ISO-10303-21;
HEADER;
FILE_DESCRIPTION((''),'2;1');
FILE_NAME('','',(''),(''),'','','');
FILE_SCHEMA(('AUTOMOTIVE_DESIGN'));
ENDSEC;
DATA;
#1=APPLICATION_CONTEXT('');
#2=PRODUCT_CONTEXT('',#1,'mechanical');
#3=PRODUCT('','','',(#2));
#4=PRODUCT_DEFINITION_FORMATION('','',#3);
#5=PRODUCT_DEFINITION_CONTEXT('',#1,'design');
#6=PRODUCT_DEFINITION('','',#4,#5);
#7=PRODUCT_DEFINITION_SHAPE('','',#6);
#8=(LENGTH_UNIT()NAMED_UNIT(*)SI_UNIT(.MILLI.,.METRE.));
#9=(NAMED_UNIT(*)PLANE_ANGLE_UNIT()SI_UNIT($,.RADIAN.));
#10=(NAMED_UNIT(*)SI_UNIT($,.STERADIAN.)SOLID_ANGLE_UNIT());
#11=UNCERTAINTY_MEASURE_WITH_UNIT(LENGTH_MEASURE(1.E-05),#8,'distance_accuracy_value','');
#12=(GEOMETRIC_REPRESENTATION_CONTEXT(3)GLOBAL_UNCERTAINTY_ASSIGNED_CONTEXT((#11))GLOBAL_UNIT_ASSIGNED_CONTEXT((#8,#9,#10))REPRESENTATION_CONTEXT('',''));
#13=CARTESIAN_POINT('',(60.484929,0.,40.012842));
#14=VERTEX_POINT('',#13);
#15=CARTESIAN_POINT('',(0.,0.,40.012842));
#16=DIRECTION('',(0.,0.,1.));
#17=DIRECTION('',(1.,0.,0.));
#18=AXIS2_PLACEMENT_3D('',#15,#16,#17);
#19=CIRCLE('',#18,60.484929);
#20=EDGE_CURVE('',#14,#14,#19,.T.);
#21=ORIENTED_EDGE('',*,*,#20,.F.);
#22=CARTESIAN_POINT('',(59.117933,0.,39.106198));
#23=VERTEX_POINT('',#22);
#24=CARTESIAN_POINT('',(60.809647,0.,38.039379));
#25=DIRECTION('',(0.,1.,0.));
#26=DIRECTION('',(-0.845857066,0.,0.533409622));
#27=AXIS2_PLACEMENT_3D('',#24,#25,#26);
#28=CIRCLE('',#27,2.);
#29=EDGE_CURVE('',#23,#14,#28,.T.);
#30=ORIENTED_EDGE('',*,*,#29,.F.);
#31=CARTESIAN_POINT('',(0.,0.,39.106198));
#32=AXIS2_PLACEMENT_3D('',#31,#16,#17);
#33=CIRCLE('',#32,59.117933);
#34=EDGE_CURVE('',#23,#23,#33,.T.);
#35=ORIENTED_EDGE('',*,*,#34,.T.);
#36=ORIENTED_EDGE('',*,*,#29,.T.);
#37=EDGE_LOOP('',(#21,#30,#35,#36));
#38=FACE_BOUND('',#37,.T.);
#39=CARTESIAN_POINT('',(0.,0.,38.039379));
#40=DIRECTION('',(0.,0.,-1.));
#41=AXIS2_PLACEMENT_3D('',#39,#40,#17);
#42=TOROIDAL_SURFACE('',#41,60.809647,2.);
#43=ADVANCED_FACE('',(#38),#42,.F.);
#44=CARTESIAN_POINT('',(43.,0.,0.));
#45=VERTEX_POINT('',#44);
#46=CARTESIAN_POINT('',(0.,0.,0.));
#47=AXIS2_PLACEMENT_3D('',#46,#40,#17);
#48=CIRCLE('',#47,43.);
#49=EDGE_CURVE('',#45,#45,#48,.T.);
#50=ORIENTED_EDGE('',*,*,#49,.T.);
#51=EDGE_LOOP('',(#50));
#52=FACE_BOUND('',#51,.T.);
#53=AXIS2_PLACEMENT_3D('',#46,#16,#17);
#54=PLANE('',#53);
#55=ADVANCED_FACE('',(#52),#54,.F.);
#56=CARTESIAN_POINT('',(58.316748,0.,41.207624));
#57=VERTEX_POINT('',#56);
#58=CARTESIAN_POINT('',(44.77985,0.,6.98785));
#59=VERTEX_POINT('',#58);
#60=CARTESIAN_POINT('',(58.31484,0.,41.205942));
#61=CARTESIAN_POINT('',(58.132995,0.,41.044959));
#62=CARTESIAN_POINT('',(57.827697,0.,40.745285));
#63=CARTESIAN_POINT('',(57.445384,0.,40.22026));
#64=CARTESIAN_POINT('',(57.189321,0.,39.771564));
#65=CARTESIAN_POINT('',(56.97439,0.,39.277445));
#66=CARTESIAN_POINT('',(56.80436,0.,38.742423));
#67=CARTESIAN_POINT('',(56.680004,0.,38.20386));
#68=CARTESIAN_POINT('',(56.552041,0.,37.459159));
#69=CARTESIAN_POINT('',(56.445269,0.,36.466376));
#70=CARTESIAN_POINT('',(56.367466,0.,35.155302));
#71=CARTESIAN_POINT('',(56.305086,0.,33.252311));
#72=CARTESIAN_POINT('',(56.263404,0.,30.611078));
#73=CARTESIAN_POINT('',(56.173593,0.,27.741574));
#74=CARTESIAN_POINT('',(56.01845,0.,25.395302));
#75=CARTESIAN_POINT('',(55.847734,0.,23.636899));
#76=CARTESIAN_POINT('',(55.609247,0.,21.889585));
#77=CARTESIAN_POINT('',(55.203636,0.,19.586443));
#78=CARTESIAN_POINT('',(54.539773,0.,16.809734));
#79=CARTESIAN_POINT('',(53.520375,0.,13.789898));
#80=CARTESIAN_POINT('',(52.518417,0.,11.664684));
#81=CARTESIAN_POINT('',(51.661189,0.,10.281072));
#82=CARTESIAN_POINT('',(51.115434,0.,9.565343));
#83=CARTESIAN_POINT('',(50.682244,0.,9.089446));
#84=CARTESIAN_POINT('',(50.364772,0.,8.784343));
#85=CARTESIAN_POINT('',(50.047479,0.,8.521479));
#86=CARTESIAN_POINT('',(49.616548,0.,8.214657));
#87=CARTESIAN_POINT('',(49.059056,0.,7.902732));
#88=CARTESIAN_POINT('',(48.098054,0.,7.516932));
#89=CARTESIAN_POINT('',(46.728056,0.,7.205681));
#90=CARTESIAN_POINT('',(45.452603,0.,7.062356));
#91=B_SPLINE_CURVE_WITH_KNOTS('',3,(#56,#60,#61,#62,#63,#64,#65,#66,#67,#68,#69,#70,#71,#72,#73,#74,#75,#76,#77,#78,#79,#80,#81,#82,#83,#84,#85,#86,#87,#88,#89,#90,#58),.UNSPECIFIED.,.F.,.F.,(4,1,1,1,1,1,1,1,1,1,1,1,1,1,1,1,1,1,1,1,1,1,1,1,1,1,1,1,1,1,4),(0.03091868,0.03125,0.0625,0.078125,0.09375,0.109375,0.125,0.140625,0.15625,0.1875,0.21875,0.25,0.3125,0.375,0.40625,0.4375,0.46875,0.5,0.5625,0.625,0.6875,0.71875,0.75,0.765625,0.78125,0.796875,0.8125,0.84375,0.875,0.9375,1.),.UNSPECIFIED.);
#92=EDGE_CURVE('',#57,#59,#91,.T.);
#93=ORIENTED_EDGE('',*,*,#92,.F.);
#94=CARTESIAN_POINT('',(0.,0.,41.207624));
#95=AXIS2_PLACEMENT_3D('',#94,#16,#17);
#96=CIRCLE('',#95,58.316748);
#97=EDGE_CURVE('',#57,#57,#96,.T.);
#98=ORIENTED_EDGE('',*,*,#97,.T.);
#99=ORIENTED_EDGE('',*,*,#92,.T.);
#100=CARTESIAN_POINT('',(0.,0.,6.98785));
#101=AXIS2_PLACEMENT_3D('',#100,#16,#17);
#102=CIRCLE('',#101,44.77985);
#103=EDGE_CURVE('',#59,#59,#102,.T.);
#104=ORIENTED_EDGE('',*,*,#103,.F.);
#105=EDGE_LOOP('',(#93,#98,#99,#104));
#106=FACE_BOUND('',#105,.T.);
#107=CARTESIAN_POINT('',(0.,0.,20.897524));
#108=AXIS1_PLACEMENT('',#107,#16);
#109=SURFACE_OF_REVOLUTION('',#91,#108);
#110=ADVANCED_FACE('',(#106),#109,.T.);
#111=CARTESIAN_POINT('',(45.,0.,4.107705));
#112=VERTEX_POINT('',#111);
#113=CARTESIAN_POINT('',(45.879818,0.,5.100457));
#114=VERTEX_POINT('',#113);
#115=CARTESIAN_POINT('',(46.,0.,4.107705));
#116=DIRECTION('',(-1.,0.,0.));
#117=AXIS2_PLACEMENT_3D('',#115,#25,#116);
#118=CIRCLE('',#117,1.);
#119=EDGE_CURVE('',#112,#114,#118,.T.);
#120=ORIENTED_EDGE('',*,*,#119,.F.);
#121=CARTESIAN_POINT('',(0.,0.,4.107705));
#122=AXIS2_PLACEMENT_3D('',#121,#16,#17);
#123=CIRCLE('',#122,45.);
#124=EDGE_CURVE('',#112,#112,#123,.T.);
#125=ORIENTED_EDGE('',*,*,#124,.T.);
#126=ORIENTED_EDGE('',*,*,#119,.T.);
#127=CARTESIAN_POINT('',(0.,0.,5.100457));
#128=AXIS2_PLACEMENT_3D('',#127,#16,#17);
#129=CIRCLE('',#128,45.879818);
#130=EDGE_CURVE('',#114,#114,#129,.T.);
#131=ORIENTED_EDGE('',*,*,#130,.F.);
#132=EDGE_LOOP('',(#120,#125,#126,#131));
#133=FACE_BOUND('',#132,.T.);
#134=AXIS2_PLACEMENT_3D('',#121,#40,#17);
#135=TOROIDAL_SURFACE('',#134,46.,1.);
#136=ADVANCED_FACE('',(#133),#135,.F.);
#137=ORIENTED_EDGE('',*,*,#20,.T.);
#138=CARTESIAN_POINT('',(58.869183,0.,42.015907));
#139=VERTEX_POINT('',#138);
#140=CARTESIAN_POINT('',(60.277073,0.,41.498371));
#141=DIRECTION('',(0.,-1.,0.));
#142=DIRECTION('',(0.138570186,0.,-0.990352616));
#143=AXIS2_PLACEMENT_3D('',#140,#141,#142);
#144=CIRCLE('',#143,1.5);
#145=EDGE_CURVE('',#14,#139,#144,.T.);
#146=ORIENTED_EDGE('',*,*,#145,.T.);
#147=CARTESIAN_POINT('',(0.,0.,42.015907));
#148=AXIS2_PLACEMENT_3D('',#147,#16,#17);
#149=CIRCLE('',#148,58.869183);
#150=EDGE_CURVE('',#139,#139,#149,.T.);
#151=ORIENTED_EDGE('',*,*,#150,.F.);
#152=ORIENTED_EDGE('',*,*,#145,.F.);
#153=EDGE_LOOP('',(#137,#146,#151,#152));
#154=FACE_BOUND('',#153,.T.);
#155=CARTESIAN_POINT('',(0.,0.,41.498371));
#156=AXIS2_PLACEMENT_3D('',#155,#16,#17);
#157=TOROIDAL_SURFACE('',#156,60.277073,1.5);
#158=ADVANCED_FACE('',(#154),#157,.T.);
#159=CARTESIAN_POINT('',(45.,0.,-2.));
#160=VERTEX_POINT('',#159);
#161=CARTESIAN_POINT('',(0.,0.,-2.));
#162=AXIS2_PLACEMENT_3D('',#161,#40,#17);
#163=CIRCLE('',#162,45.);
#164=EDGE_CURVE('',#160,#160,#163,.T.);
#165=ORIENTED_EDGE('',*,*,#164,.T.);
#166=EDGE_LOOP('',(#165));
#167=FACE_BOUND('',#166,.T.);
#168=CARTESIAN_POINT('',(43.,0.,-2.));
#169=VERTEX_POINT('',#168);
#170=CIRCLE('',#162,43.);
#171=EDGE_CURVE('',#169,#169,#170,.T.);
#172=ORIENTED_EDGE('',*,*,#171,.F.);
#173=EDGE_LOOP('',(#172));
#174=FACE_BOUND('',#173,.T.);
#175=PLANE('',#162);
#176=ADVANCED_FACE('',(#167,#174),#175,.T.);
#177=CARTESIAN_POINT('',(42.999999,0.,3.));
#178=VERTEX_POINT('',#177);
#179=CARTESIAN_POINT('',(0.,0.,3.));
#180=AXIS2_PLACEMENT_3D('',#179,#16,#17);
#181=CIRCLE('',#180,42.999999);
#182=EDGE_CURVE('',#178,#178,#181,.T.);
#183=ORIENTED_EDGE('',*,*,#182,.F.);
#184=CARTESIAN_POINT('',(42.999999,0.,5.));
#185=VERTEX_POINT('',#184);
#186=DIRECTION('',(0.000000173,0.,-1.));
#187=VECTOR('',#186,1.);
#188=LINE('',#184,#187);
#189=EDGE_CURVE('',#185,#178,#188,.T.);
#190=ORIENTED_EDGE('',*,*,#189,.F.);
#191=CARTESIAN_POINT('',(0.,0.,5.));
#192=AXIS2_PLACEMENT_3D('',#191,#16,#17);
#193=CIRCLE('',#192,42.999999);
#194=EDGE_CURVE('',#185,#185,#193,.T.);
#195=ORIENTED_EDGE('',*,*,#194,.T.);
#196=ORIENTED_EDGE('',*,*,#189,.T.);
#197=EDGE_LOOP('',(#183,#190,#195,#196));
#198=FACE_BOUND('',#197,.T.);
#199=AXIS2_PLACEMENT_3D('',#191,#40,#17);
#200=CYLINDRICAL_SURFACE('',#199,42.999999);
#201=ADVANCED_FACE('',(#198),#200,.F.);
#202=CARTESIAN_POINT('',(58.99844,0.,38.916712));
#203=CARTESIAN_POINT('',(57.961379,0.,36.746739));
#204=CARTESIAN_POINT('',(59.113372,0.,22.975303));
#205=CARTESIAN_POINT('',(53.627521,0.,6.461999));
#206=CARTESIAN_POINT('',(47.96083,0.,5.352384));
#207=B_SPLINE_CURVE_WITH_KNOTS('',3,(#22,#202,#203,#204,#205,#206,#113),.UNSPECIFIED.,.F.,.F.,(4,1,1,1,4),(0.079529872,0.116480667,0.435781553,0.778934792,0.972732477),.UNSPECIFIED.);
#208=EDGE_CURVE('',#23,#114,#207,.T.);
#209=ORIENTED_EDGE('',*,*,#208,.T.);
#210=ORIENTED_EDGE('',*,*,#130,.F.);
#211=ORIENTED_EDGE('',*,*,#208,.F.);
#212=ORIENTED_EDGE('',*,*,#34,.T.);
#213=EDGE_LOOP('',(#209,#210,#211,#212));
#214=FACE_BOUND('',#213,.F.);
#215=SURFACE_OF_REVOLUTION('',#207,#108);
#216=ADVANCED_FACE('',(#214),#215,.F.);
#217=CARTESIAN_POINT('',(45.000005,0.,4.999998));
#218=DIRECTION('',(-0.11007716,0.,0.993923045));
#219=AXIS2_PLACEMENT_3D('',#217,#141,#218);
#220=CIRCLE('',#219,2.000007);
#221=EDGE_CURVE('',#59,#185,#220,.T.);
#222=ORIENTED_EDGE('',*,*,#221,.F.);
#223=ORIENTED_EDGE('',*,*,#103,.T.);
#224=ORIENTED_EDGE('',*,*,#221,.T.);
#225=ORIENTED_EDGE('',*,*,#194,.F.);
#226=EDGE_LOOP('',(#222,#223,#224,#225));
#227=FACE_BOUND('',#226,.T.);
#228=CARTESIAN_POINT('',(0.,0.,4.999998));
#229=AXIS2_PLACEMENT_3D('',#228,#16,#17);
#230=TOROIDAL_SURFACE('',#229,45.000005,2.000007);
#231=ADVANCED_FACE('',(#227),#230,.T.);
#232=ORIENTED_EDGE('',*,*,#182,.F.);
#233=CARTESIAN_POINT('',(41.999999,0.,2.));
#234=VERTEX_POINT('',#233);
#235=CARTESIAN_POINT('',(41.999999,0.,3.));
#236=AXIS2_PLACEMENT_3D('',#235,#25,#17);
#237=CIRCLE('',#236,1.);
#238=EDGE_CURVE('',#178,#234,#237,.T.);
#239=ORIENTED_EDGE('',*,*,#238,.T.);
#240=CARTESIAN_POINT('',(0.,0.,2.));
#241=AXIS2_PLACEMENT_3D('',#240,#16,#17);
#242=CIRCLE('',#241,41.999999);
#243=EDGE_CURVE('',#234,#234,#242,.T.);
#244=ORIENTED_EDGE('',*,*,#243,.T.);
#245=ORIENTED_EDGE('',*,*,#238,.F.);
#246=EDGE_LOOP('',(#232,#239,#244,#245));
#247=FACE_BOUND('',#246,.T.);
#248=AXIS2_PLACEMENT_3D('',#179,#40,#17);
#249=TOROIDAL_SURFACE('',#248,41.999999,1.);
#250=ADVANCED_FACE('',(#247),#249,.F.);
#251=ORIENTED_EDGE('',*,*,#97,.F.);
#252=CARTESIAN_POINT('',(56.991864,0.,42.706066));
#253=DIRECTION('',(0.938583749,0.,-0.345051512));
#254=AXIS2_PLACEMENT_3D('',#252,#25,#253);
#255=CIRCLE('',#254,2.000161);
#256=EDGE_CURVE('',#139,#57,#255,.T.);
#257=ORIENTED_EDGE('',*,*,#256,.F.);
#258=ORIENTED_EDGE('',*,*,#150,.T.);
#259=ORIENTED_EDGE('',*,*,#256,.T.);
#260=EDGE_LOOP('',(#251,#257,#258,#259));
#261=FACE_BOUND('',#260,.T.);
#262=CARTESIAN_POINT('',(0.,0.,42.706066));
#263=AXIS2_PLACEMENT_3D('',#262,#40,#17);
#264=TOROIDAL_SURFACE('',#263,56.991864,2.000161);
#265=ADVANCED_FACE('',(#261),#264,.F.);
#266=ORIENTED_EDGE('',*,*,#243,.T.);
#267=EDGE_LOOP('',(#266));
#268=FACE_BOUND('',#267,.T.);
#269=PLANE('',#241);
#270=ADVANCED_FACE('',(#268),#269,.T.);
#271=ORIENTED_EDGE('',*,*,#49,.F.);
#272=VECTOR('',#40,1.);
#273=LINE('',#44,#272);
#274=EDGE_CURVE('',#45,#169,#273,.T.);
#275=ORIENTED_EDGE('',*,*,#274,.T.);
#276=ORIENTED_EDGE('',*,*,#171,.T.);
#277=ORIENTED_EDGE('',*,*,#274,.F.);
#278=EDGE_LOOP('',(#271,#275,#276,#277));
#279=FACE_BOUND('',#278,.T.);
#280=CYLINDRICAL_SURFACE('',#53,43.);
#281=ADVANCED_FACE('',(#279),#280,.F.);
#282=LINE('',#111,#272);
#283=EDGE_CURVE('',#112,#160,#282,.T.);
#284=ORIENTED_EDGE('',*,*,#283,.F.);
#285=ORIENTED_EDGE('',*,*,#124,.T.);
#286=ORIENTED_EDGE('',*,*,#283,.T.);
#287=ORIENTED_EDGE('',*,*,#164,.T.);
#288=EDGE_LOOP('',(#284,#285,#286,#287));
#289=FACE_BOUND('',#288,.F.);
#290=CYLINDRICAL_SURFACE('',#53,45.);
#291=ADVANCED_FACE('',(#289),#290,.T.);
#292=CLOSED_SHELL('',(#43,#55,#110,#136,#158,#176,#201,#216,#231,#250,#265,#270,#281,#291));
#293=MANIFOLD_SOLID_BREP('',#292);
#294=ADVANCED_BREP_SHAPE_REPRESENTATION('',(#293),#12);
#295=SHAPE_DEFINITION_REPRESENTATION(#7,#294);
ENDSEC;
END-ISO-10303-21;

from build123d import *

# Parameters (mm, degrees)
F2_R     = 1
F3_R     = 45
F3_R_2   = 43
F4_DEPTH = 2


# Not quite as in the source:
# - ends of sketch curves that miss each other by under 0.0002 mm in the source are joined
# - the dataset's text gives a spline's control points without its knots; the knots are read off the source's solid


with BuildPart() as f1:
    # F0 (on Front) → F1 (revolve)
    with BuildSketch(Plane.XZ):
        with BuildLine():
            Line((0, 2), (0, 0))
            Line((0, 0), (45, 0))
            Line((45, 0), (45, 4.1077052209))
            ThreePointArc((45, 4.1077052209), (45.251607634, 4.770961481), (45.8798177332, 5.1004570644))
            add(Edge.make_bspline(
                [(59.117932503, 39.1061978883), (58.9984398686, 38.9167118255), (57.961379378, 36.7467385449), (59.1133721589, 22.9753032204), (53.6275212518, 6.4619991243), (47.9608297571, 5.3523838112), (45.8798177332, 5.1004570644)],
                knots=[0.079529872, 0.079529872, 0.079529872, 0.079529872, 0.1164806675, 0.435781553, 0.7789347917, 0.9727324769, 0.9727324769, 0.9727324769, 0.9727324769], degree=3))
            ThreePointArc((59.117932503, 39.1061978883), (59.7042053248, 39.7061118302), (60.4849287438, 40.0128421715))
            ThreePointArc((60.4849287438, 40.0128421715), (61.4445872468, 42.4401309197), (58.8691826, 42.0159069052))
            ThreePointArc((58.8691826, 42.0159069052), (58.643182834, 41.577442369), (58.31674753, 41.2076237072))
            add(Edge.make_bspline(
                [(58.31674753, 41.2076237072), (58.3148397341, 41.2059420359), (58.1329946532, 41.0449587485), (57.8276969018, 40.7452853769), (57.4453837385, 40.220259631), (57.1893214461, 39.771564073), (56.9743902421, 39.277445408), (56.8043597407, 38.7424234539), (56.680003708, 38.203859582), (56.5520410764, 37.4591588813), (56.4452689195, 36.4663757584), (56.3674656809, 35.155302403), (56.3050858948, 33.2523114152), (56.2634042278, 30.6110777497), (56.1735934989, 27.7415742893), (56.018450433, 25.3953023971), (55.8477339812, 23.6368985798), (55.6092469781, 21.8895853556), (55.2036356572, 19.5864432025), (54.539773, 16.8097339131), (53.5203746444, 13.7898979021), (52.5184171783, 11.6646836577), (51.6611889381, 10.2810715096), (51.1154343385, 9.5653431356), (50.6822443153, 9.0894464967), (50.3647724491, 8.7843429997), (50.0474792797, 8.5214792406), (49.6165481094, 8.2146567762), (49.059056291, 7.9027315772), (48.0980536701, 7.5169322584), (46.7280561328, 7.2056808972), (45.4526028209, 7.0623561488), (44.7798504425, 6.9878504754)],
                knots=[0.0309186802, 0.0309186802, 0.0309186802, 0.0309186802, 0.03125, 0.0625, 0.078125, 0.09375, 0.109375, 0.125, 0.140625, 0.15625, 0.1875, 0.21875, 0.25, 0.3125, 0.375, 0.40625, 0.4375, 0.46875, 0.5, 0.5625, 0.625, 0.6875, 0.71875, 0.75, 0.765625, 0.78125, 0.796875, 0.8125, 0.84375, 0.875, 0.9375, 1, 1, 1, 1], degree=3))
            ThreePointArc((44.7798504425, 6.9878504754), (43.5099827366, 6.3341112085), (42.9999989595, 5))
            Line((42.9999989595, 5), (42.9999994798, 2))
            Line((42.9999994798, 2), (0, 2))
        make_face()
    revolve(axis=Axis((0, 0, 20.8975244313), (0, 0, 1)))

    # F2
    f2_edges = [f1.edges().sort_by_distance(p)[0] for p in [
        (-42.999999, 0, 2),
    ]]
    fillet(f2_edges, radius=F2_R)

    # F3 (on face) → F4 (join)
    with BuildSketch(Plane(origin=(0, 0, 0), x_dir=(1, 0, 0), z_dir=(0, 0, -1))):
        Circle(F3_R)
        Circle(F3_R_2, mode=Mode.SUBTRACT)
    extrude(amount=F4_DEPTH)


solid = f1.part
